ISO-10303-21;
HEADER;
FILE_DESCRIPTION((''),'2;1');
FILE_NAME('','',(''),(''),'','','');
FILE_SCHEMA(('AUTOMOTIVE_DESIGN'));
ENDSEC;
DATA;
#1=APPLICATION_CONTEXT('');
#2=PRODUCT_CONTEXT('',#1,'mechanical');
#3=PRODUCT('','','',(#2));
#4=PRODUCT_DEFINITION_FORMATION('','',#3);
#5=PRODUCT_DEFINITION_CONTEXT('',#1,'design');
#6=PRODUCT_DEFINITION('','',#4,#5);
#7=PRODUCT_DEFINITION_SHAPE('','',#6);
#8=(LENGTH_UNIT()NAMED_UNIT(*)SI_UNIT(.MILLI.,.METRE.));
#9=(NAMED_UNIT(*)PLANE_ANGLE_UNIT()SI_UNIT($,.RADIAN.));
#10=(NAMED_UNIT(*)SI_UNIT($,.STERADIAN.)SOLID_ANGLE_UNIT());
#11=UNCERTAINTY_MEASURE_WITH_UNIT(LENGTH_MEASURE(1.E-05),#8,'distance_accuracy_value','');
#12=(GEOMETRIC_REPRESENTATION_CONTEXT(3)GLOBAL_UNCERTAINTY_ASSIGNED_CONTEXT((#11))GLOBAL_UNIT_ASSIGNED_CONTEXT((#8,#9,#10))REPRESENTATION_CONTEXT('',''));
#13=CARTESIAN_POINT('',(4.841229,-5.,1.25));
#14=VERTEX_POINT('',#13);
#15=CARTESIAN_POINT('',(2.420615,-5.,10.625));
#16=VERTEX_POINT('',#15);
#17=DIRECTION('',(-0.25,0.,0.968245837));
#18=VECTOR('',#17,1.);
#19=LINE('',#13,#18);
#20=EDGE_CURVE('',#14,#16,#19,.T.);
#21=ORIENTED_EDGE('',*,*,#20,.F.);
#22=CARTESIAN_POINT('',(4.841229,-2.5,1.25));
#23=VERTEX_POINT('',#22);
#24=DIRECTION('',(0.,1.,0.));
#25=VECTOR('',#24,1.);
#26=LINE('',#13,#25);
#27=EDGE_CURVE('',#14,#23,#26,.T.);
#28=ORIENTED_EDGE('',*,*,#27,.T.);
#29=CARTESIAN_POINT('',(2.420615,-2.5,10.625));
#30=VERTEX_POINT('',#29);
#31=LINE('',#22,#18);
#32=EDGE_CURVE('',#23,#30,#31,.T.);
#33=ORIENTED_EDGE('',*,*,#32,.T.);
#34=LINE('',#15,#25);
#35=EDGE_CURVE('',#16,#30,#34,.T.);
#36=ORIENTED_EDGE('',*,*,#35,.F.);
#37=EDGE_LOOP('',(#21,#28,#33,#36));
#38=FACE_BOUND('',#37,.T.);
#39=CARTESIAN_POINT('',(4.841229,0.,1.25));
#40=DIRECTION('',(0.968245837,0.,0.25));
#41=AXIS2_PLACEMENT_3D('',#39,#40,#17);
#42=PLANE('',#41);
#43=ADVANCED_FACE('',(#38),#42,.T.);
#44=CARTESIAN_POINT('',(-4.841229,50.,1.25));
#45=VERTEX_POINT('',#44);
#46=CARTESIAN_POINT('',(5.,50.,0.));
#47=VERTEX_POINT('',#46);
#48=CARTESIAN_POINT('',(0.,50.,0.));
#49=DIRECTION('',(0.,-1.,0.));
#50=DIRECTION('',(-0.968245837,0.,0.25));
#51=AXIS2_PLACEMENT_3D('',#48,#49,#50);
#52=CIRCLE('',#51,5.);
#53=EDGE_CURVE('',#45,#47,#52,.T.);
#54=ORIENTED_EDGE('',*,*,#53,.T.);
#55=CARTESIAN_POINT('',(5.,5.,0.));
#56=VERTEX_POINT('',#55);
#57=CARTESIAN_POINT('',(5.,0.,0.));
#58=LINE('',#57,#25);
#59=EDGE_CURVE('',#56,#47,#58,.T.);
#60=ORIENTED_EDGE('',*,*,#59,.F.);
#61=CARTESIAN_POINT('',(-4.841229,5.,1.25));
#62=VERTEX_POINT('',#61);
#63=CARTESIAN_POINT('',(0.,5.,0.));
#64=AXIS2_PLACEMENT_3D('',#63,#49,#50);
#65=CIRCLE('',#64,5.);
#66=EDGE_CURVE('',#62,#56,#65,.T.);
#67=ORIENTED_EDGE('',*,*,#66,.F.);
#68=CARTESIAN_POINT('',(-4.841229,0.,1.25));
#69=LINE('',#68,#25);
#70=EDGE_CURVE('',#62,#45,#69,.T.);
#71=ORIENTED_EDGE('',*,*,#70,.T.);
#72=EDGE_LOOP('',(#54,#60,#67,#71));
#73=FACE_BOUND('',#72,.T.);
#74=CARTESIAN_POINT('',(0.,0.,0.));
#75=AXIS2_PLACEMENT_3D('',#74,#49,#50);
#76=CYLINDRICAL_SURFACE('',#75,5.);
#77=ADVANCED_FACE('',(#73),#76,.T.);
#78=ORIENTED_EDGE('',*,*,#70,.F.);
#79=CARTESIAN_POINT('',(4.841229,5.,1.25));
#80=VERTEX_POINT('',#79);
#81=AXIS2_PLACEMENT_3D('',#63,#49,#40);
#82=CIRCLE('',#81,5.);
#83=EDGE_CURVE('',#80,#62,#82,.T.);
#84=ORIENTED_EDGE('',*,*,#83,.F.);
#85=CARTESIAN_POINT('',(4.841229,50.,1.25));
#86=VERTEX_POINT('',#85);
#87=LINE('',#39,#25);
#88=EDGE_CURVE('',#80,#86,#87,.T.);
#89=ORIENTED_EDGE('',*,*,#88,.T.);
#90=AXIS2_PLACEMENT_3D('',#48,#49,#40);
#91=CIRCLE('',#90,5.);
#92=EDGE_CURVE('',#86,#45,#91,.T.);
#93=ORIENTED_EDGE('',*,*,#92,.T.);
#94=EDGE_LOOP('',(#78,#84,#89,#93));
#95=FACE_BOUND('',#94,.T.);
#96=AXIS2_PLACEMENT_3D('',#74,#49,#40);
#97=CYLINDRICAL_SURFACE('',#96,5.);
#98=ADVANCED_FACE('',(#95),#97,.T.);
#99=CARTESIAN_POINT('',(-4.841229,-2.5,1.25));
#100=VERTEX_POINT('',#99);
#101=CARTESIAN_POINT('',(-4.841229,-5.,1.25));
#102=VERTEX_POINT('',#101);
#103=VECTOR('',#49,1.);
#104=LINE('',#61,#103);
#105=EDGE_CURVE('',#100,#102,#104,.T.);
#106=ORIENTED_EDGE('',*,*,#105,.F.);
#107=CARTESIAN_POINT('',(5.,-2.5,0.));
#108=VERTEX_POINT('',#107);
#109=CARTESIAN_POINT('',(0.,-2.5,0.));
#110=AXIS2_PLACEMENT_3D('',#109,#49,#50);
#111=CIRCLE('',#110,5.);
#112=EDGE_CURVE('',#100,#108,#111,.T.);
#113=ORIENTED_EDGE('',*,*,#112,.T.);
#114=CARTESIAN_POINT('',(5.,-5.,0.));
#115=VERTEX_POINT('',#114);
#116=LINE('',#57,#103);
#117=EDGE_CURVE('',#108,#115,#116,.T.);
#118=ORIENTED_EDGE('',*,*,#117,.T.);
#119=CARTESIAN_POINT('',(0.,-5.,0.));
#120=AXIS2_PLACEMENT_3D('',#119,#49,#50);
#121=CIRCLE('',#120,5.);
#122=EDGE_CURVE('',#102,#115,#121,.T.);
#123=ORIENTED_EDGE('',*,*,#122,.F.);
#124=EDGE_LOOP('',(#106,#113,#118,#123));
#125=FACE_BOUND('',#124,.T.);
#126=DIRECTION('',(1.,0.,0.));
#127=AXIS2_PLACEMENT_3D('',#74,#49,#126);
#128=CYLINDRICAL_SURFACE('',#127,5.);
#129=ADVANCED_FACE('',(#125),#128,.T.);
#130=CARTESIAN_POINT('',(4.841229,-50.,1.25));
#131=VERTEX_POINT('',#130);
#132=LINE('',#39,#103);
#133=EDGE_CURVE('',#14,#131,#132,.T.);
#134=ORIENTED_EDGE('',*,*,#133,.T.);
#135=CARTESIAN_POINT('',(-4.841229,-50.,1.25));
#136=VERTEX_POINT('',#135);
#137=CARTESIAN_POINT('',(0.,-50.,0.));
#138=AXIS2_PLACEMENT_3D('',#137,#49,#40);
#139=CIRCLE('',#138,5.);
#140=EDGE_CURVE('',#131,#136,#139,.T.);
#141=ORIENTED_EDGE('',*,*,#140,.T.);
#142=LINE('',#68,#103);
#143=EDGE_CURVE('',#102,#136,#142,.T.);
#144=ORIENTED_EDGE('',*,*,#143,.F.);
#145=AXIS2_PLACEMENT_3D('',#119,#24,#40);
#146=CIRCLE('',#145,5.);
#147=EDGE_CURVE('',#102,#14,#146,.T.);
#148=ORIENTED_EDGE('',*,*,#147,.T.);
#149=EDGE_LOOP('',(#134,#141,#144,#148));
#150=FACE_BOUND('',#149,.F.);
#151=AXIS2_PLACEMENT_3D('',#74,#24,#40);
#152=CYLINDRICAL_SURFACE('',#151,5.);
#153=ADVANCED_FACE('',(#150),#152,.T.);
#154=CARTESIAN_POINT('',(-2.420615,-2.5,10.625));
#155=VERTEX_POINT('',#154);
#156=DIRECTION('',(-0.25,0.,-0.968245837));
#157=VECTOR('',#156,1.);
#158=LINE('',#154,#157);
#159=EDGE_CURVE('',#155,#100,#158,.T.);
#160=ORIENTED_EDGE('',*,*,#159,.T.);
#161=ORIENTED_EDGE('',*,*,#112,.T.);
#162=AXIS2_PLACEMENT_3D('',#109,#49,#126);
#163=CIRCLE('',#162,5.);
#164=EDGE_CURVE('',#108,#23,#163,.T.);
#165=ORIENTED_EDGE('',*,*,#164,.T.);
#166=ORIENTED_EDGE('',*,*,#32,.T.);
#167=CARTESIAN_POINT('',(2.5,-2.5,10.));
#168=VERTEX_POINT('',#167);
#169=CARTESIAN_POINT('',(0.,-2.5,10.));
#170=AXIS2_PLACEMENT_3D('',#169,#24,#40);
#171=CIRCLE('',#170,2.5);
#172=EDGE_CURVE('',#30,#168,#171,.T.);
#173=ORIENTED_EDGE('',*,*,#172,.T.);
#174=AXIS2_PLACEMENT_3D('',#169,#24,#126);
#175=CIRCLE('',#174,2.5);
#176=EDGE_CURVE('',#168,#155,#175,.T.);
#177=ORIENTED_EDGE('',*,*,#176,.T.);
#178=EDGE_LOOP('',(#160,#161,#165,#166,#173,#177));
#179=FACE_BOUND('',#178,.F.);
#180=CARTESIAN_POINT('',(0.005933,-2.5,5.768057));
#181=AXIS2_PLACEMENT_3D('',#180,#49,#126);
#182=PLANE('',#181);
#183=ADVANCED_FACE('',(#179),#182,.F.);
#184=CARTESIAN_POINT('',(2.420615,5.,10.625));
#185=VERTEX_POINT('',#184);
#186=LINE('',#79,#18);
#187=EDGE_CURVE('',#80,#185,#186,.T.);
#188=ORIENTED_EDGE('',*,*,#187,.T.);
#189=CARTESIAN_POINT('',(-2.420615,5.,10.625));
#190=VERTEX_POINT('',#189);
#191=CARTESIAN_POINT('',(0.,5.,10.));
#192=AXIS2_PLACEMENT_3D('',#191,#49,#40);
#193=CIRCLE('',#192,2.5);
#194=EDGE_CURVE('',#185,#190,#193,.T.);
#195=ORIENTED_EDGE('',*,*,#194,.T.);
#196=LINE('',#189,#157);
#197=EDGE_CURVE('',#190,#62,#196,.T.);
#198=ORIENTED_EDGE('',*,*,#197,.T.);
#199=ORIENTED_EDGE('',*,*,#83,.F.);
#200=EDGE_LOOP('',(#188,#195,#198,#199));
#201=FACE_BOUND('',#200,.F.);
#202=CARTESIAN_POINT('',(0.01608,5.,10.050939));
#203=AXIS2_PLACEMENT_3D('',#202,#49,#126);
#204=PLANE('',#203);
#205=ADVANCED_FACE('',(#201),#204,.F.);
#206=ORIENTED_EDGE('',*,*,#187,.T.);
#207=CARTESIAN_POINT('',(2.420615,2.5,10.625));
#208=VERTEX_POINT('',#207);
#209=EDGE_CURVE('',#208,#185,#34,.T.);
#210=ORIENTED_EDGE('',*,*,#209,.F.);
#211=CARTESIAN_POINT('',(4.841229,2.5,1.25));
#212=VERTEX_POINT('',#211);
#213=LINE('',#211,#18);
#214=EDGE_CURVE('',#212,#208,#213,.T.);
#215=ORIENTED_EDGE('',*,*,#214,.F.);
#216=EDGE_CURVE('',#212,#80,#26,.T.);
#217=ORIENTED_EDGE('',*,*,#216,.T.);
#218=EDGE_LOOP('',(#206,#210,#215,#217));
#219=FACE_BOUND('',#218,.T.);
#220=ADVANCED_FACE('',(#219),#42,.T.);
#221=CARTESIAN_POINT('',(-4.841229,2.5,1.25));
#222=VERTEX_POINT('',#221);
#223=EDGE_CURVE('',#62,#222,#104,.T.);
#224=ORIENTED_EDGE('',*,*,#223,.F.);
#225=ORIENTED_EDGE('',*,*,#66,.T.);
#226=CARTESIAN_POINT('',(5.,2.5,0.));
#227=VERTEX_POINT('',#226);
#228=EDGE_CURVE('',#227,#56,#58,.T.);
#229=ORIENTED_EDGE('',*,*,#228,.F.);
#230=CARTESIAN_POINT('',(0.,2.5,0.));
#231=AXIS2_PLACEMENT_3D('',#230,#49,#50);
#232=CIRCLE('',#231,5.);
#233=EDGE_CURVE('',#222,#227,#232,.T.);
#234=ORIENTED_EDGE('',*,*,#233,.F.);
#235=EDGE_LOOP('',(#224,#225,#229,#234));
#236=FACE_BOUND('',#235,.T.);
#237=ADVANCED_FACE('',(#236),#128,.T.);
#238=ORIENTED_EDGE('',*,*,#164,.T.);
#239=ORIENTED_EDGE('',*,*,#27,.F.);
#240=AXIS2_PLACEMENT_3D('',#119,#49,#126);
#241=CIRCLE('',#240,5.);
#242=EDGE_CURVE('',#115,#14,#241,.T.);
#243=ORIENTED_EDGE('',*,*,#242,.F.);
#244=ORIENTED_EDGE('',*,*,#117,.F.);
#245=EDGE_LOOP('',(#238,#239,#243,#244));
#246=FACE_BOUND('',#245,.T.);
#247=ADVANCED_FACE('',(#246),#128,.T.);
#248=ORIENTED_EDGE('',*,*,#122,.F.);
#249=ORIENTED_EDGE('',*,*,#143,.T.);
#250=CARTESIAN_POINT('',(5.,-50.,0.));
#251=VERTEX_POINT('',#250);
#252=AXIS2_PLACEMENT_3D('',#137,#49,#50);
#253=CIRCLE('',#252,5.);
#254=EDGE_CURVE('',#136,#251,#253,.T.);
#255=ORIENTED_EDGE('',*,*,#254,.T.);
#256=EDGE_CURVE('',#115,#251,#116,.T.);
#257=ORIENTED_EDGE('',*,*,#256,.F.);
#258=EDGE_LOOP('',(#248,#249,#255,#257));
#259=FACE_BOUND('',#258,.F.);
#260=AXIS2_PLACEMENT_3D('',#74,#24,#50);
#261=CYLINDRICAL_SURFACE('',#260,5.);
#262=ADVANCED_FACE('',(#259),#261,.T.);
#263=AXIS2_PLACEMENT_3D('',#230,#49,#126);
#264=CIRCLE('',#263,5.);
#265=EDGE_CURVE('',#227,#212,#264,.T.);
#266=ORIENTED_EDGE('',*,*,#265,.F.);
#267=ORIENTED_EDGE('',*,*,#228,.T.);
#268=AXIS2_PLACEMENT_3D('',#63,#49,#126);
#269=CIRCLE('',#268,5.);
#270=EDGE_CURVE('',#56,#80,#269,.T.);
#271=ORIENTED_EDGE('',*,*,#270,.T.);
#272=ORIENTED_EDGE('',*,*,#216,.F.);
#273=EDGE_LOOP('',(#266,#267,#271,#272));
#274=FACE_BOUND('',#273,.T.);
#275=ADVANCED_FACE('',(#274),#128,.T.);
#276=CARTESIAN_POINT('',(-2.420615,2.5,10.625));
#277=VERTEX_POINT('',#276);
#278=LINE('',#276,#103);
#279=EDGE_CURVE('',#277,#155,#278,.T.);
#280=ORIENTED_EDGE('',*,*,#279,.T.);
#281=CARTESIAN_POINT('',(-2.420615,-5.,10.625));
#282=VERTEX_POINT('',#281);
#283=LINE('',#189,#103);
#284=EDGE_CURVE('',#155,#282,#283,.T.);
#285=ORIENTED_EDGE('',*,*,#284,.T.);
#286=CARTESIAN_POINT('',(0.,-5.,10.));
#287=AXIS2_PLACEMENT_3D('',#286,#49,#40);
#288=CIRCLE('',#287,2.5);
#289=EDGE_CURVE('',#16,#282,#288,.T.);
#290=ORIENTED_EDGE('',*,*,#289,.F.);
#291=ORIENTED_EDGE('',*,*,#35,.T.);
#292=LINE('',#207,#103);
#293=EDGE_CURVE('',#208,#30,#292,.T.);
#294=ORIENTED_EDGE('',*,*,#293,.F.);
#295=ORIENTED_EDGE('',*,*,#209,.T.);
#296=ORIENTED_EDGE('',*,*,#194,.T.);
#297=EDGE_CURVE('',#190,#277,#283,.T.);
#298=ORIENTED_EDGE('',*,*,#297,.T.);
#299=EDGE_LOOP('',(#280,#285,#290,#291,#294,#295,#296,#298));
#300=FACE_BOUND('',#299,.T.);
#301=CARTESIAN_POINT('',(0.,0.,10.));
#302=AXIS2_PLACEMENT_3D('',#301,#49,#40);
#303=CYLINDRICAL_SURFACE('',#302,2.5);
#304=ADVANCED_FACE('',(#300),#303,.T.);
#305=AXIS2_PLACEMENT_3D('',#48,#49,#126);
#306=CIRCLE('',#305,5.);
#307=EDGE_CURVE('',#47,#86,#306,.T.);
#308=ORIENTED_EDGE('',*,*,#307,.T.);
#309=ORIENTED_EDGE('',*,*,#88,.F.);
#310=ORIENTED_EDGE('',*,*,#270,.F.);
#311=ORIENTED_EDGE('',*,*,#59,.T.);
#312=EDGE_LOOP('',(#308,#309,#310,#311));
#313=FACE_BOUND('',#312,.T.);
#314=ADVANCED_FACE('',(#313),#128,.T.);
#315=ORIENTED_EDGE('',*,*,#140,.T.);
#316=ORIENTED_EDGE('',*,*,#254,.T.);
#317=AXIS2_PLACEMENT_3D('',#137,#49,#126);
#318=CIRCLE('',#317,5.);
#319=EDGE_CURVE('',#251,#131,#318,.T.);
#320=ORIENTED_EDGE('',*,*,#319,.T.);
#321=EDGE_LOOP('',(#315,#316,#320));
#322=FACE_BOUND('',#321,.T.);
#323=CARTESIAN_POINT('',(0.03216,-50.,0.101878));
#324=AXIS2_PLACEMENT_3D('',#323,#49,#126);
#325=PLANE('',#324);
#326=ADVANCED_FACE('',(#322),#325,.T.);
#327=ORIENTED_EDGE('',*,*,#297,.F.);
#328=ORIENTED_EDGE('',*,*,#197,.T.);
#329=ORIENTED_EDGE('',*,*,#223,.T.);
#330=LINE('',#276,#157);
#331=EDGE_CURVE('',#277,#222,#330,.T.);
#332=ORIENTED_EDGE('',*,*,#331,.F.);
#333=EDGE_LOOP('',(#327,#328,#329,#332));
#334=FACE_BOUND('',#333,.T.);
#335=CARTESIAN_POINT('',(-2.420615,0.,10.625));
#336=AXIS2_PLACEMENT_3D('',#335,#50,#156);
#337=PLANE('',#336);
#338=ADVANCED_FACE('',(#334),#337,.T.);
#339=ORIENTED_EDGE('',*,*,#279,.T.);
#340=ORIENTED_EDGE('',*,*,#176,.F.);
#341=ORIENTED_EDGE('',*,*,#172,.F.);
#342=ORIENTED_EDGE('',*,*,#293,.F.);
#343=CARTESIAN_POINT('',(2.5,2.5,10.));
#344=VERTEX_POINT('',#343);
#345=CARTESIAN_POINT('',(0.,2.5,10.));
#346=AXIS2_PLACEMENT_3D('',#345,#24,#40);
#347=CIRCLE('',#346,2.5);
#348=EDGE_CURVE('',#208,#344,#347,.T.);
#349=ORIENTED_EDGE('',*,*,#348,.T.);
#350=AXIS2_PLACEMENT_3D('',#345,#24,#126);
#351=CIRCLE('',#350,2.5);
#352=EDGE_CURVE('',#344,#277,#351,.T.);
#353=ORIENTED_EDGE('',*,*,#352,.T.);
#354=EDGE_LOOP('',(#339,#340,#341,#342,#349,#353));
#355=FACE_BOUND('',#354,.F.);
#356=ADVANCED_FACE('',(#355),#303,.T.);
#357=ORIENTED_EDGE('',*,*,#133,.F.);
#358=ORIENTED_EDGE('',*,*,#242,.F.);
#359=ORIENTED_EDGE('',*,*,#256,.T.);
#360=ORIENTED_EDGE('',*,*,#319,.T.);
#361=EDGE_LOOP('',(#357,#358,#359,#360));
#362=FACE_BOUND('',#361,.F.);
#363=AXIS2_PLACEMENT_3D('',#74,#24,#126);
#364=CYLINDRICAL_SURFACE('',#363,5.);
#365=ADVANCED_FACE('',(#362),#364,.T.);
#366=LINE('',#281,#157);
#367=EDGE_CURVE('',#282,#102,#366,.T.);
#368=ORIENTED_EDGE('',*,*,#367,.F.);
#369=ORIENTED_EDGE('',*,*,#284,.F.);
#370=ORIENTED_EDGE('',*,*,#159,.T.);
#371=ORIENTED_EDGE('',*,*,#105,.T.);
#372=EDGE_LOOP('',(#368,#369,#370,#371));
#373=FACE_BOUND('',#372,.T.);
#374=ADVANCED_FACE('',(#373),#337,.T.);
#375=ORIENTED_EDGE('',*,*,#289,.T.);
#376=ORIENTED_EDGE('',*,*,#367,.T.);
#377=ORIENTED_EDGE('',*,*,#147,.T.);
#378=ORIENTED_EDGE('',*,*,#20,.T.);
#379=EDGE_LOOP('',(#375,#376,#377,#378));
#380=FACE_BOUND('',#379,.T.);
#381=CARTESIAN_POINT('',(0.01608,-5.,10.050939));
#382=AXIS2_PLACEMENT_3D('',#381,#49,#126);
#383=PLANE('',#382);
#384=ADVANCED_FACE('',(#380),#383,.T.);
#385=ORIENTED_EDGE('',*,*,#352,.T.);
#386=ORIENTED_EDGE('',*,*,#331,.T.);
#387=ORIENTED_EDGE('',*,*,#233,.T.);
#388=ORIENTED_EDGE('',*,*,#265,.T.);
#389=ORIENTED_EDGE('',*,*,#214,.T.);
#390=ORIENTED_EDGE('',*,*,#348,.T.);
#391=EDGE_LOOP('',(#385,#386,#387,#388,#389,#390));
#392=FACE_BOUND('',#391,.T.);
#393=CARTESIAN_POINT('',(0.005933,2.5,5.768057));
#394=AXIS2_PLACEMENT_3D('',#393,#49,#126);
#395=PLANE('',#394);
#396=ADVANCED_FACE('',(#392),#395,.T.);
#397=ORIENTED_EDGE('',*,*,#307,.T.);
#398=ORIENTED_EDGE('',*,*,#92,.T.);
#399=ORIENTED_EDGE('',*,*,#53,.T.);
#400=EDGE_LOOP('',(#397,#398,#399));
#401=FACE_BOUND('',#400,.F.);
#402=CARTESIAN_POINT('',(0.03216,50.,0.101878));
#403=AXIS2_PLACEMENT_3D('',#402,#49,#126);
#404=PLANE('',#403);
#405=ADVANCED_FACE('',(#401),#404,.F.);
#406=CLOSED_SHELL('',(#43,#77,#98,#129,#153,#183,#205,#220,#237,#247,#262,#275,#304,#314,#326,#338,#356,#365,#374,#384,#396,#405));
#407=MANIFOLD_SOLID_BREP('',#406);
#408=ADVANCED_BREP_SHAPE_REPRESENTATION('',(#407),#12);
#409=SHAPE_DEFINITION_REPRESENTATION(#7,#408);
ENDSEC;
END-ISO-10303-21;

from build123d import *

# Parameters (mm, degrees)
F1_DEPTH = 5
F2_DEPTH = 50
F3_DEPTH = 2.5


with BuildPart() as f1:
    # F0 (on Front) → F1 (new body, symmetric)
    with BuildSketch(Plane.XZ):
        with BuildLine():
            ThreePointArc((2.5, 10), (2.4800742407, 10.3150107312), (2.4206145914, 10.625))
            ThreePointArc((2.4206145914, 10.625), (0, 12.5), (-2.4206145914, 10.625))
            ThreePointArc((-2.4206145914, 10.625), (-0.3150107312, 7.5199257593), (2.5, 10))
        make_face()
        with BuildLine():
            ThreePointArc((-4.8412291828, 1.25), (0, 5), (4.8412291828, 1.25))
            Line((4.8412291828, 1.25), (2.4206145914, 10.625))
            ThreePointArc((2.4206145914, 10.625), (2.4800742407, 10.3150107312), (2.5, 10))
            ThreePointArc((2.5, 10), (-0.3150107312, 7.5199257593), (-2.4206145914, 10.625))
            Line((-2.4206145914, 10.625), (-4.8412291828, 1.25))
        make_face()
        with BuildLine():
            ThreePointArc((-4.8412291828, 1.25), (-0.6300214624, -4.9601484813), (5, 0))
            ThreePointArc((5, 0), (4.9601484813, 0.6300214624), (4.8412291828, 1.25))
            ThreePointArc((4.8412291828, 1.25), (0, 5), (-4.8412291828, 1.25))
        make_face()
    extrude(amount=F1_DEPTH, both=True)

    # F0 (on Front) → F2 (join, symmetric)
    with BuildSketch(Plane.XZ):
        with BuildLine():
            ThreePointArc((-4.8412291828, 1.25), (-0.6300214624, -4.9601484813), (5, 0))
            ThreePointArc((5, 0), (4.9601484813, 0.6300214624), (4.8412291828, 1.25))
            ThreePointArc((4.8412291828, 1.25), (0, 5), (-4.8412291828, 1.25))
        make_face()
    extrude(amount=F2_DEPTH, both=True)

    # F0 (on Front) → F3 (cut, symmetric)
    with BuildSketch(Plane.XZ):
        with BuildLine():
            ThreePointArc((-4.8412291828, 1.25), (0, 5), (4.8412291828, 1.25))
            Line((4.8412291828, 1.25), (2.4206145914, 10.625))
            ThreePointArc((2.4206145914, 10.625), (2.4800742407, 10.3150107312), (2.5, 10))
            ThreePointArc((2.5, 10), (-0.3150107312, 7.5199257593), (-2.4206145914, 10.625))
            Line((-2.4206145914, 10.625), (-4.8412291828, 1.25))
        make_face()
        with BuildLine():
            ThreePointArc((-4.8412291828, 1.25), (-0.6300214624, -4.9601484813), (5, 0))
            ThreePointArc((5, 0), (4.9601484813, 0.6300214624), (4.8412291828, 1.25))
            ThreePointArc((4.8412291828, 1.25), (0, 5), (-4.8412291828, 1.25))
        make_face()
    extrude(amount=F3_DEPTH, both=True, mode=Mode.SUBTRACT)


solid = f1.part
